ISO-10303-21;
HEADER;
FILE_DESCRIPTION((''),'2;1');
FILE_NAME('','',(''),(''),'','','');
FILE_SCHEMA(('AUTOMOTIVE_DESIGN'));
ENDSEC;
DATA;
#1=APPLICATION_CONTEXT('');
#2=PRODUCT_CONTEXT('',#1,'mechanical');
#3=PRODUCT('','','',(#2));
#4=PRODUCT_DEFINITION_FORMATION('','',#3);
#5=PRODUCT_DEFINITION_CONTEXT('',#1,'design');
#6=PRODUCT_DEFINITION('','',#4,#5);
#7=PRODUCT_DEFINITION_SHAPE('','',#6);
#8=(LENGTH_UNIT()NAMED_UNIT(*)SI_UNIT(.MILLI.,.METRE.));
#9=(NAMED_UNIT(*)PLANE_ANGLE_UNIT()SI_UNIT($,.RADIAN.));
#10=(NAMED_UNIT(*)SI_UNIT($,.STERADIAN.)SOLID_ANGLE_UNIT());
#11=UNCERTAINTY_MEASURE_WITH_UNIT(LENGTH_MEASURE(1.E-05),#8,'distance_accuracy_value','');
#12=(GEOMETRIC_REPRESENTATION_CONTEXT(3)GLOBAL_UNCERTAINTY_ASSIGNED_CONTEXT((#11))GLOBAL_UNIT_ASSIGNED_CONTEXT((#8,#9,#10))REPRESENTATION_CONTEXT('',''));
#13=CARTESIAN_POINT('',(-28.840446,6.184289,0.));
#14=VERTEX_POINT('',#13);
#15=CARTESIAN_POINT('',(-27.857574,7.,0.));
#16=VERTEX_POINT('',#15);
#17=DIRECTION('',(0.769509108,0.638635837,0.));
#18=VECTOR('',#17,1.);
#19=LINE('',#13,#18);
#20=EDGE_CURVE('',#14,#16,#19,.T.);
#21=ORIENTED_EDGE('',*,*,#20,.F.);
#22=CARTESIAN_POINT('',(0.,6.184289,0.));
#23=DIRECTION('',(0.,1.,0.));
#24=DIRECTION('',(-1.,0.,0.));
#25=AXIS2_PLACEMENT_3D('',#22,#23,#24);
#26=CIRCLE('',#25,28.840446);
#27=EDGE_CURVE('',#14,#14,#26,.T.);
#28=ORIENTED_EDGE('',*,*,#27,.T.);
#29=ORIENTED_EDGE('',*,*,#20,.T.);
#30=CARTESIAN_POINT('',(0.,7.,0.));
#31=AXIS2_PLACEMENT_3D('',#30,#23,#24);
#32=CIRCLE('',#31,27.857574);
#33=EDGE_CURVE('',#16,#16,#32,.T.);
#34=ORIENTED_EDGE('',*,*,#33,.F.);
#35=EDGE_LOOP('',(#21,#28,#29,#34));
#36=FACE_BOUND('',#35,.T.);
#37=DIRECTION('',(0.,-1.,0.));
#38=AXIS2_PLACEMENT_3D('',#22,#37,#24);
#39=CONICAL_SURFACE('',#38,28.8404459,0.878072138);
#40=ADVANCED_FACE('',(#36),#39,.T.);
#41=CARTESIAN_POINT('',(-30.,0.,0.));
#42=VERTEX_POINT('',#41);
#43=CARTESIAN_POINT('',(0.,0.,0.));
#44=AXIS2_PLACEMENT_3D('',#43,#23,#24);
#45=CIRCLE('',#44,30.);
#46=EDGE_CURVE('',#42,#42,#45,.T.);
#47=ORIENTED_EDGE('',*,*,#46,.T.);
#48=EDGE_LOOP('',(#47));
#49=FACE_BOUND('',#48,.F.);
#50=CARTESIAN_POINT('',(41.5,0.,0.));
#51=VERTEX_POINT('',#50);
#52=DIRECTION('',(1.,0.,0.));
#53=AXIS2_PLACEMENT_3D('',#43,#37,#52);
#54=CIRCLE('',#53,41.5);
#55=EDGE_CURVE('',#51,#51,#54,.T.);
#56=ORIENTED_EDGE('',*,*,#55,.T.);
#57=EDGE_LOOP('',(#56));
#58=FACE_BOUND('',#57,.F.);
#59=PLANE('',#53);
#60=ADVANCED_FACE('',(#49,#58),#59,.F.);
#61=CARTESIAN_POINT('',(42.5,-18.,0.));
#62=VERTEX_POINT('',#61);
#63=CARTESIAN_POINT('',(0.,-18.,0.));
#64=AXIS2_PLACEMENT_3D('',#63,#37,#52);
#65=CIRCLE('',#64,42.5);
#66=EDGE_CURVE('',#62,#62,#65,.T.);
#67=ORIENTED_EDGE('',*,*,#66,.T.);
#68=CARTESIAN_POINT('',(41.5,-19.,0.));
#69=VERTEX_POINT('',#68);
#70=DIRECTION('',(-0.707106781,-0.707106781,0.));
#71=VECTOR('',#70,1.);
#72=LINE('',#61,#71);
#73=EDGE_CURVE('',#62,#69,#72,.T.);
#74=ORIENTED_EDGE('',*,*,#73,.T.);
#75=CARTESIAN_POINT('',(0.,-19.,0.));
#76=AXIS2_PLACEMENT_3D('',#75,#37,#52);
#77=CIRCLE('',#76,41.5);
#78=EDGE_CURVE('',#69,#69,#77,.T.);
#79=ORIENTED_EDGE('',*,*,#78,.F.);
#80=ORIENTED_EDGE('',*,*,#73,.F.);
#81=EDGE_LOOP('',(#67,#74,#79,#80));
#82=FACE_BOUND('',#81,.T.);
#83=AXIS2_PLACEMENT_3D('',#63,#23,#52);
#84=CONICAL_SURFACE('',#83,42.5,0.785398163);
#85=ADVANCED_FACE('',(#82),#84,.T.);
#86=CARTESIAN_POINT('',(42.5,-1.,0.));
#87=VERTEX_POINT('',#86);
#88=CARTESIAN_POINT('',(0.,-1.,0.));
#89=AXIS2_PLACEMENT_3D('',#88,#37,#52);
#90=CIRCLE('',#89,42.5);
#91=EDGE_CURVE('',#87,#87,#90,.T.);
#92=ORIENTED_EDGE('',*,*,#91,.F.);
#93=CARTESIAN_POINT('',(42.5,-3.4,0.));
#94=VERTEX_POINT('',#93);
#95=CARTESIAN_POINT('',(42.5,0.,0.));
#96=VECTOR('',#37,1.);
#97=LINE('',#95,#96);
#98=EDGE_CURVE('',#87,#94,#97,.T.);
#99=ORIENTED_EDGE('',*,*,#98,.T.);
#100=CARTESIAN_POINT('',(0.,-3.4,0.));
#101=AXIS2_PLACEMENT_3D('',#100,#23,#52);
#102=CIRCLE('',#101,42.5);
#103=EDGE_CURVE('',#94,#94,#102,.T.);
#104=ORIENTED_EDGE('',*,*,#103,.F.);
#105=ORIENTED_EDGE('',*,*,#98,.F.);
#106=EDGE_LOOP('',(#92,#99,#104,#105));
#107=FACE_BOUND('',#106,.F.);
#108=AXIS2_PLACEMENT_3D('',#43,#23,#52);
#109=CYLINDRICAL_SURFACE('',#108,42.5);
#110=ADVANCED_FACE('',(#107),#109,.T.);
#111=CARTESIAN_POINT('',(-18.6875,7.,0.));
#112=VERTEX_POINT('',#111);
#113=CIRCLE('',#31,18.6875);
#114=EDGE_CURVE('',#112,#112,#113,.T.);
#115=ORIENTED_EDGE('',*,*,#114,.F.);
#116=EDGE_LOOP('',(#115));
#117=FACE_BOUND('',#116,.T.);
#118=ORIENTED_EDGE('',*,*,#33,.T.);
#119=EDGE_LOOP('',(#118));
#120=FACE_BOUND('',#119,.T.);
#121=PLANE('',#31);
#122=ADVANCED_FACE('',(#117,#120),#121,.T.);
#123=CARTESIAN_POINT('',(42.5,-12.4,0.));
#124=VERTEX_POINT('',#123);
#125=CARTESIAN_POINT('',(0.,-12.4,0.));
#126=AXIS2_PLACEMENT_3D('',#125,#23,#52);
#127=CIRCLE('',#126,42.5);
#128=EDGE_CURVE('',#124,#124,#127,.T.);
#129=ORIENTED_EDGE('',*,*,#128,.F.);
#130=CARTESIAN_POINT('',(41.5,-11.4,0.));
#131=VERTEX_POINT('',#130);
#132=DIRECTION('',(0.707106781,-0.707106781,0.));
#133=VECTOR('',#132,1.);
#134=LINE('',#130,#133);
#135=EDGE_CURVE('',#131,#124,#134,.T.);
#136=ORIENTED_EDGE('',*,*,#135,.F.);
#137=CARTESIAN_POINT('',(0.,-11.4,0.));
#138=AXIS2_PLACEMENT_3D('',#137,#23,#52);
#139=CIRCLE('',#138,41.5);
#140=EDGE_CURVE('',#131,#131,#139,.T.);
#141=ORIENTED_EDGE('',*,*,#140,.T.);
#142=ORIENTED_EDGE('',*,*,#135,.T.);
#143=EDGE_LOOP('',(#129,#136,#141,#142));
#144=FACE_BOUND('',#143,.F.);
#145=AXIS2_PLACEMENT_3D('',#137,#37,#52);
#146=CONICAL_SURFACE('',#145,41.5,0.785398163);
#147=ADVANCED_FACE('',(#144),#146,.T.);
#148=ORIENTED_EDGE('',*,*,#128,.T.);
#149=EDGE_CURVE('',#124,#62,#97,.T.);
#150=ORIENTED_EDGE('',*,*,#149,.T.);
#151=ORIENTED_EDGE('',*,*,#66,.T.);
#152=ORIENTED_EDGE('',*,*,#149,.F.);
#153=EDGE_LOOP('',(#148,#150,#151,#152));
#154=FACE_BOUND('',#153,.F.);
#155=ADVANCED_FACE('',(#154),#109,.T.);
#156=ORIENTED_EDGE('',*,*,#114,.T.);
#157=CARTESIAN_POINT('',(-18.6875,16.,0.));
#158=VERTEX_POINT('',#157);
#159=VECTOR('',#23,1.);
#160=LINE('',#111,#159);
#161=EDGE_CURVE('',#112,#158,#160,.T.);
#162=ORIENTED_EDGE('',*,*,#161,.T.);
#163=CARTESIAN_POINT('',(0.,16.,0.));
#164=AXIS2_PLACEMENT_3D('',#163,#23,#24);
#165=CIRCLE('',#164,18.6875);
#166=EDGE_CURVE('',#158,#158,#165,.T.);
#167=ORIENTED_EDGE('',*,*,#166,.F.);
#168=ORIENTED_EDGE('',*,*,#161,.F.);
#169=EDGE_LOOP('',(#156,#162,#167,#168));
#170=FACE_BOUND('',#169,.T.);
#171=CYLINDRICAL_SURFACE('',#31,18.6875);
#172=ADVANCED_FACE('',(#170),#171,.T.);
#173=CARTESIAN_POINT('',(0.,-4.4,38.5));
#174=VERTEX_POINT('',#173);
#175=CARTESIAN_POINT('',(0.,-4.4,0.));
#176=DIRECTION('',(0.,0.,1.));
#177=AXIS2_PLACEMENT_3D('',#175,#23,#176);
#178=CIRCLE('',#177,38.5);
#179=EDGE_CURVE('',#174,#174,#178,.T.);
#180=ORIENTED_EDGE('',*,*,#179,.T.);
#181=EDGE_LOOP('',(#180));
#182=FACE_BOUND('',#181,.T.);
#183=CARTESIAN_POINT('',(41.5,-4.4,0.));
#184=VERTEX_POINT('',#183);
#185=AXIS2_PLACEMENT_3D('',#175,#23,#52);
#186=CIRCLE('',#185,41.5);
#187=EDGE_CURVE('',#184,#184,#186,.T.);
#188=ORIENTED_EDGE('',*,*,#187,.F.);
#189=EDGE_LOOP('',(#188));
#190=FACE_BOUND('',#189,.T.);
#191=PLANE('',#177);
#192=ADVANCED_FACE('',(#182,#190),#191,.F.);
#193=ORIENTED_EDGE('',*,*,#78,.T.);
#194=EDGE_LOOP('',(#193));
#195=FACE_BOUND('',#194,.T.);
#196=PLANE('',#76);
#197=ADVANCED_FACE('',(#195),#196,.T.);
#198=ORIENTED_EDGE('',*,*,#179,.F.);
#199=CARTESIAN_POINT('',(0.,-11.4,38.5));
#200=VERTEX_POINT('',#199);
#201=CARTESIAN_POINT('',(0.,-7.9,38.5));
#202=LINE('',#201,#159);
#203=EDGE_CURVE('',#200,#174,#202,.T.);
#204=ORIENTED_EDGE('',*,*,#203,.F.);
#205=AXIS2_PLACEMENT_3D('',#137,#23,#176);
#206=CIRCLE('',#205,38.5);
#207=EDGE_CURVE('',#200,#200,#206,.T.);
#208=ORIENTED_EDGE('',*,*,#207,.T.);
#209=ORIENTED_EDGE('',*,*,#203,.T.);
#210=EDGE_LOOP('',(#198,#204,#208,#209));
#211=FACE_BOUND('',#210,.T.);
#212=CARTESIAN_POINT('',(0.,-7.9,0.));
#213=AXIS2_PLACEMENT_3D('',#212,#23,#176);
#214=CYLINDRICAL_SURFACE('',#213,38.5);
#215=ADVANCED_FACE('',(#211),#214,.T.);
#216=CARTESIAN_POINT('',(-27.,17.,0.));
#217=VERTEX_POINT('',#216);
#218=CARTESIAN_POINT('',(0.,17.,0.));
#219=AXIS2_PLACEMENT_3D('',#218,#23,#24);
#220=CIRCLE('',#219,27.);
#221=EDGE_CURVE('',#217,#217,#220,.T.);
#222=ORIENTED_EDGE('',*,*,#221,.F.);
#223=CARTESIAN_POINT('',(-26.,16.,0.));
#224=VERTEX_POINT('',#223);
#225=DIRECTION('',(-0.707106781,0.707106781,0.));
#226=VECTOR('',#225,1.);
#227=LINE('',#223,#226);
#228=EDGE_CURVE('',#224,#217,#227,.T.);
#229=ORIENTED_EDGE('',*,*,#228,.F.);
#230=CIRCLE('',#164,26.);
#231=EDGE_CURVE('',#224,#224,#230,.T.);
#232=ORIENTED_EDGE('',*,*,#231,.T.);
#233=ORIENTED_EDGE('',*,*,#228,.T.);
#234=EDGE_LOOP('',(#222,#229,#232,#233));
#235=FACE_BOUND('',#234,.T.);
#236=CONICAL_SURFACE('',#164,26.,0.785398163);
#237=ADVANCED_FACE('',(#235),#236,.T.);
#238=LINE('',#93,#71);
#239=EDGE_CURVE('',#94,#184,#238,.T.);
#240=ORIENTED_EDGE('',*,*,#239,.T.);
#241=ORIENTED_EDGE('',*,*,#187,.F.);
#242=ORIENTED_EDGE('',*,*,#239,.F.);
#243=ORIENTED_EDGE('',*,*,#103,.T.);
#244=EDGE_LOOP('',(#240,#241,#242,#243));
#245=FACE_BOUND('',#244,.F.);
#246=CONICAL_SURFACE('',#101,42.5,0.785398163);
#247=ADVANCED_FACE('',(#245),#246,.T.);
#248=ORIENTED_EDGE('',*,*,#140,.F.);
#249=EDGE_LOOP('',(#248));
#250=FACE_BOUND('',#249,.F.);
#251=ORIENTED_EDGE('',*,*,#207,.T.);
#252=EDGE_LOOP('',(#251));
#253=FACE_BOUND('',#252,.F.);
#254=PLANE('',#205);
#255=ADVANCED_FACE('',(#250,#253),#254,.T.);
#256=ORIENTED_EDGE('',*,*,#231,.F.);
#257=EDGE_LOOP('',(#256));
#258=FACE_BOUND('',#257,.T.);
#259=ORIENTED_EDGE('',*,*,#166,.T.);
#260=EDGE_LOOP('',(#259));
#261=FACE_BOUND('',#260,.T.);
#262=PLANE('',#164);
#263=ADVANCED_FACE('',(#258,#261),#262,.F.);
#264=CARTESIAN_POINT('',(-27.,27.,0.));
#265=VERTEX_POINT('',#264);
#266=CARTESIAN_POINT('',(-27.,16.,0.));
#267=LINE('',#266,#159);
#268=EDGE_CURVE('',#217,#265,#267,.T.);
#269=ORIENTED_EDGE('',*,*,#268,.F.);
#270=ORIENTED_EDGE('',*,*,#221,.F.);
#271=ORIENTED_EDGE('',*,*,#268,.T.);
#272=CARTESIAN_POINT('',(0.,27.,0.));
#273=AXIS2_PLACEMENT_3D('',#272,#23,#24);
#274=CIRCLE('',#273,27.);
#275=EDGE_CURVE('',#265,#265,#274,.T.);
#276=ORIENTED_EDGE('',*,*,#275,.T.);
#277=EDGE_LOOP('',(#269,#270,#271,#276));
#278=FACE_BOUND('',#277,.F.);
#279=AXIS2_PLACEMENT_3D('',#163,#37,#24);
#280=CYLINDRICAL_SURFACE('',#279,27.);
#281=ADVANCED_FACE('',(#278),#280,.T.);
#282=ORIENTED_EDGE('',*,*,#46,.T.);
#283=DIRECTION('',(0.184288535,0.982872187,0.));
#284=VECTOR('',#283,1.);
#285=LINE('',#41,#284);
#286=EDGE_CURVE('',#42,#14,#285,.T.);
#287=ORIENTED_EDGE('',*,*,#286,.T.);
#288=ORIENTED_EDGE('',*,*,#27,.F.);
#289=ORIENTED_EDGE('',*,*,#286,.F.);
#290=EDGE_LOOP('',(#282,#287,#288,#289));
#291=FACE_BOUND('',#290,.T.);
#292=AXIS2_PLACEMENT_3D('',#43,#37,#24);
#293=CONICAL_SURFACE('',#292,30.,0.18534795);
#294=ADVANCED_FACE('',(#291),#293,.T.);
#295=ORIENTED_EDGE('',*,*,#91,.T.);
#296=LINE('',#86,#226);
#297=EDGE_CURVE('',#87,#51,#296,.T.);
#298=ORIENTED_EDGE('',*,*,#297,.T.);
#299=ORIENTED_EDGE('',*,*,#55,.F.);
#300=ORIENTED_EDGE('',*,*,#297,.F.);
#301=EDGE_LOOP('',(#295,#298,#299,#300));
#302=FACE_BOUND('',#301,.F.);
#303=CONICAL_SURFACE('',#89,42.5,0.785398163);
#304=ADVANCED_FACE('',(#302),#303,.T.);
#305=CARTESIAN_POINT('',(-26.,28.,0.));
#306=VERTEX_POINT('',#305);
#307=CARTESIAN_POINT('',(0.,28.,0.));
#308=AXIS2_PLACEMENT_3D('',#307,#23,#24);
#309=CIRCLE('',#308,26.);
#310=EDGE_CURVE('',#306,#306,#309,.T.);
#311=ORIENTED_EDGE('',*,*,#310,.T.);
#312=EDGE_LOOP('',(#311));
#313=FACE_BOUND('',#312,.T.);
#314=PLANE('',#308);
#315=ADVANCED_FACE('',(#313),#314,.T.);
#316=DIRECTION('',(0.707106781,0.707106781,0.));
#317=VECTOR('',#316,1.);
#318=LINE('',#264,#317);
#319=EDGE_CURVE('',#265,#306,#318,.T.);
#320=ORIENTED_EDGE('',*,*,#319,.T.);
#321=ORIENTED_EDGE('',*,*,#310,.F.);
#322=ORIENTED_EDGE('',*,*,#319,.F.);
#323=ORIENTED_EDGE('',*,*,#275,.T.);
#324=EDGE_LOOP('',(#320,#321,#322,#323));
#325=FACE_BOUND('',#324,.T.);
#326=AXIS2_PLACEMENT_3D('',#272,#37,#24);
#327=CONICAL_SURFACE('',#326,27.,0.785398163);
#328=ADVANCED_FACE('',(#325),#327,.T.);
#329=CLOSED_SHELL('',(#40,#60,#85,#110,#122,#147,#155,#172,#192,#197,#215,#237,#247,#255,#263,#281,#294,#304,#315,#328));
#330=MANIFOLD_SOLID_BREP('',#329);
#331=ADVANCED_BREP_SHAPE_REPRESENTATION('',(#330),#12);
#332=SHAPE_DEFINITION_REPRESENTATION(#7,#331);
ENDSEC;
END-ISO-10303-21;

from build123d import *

# Parameters (mm, degrees)
F0_R     = 42.5
F1_DEPTH = 19
F2_W     = 7
F2_H     = 4
F4_R     = 30
F5_DEPTH = 16
F6_R     = 27
F7_DEPTH = 12


# Not quite as in the source:
# - a fillet or chamfer that OpenCascade refuses, or shapes differently, is made with other operations: its cross-section is extruded or revolved along the edge and cut away or added


with BuildPart() as f1:
    # F0 (on Front) → F1 (new body)
    with BuildSketch(Plane.XZ):
        Circle(F0_R)
    extrude(amount=F1_DEPTH)

    # F2 (on Right) → F3 (revolve, cut)
    with BuildSketch(Plane.YZ):
        with Locations((-7.9, 40.5)):
            Rectangle(F2_W, F2_H)
    revolve(axis=Axis((0, 0, 0), (0, 1, 0)), mode=Mode.SUBTRACT)

    # F4 (on face) → F5 (join)
    with BuildSketch(Plane(origin=(0, 0, 0), x_dir=(-1, 0, 0), z_dir=(0, 1, 0))):
        Circle(F4_R)
    extrude(amount=F5_DEPTH)

    # F6 (on face) → F7 (join)
    with BuildSketch(Plane(origin=(0, 16, 0), x_dir=(-1, 0, 0), z_dir=(0, 1, 0))):
        Circle(F6_R)
    extrude(amount=F7_DEPTH)

    # F8 (on Top) → F9 (revolve, cut)
    with BuildSketch(Plane.XY):
        Polygon((-30, 16), (-30, 0), (-28.6875, 7), (-18.6875, 7), (-18.6875, 16), align=None)
    revolve(axis=Axis((0, 23.2052635401, 0), (0, 1, 0)), mode=Mode.SUBTRACT)

    # F10: chamfer of 1 on 8 edges, made by hand

    # F10_s1 → F10_t2 (revolve, cut)
    with BuildSketch(Plane.XY):
        Polygon((42.5, -3.4), (41.5, -4.4), (42.5, -4.4), align=None)
    revolve(axis=Axis((0, -4.4, 0), (0, 1, 0)), mode=Mode.SUBTRACT)

    # F10_s3 → F10_t4 (revolve, cut)
    with BuildSketch(Plane.XY):
        Polygon((41.5, -11.4), (42.5, -12.4), (42.5, -11.4), align=None)
    revolve(axis=Axis((0, -11.4, 0), (0, 1, 0)), mode=Mode.SUBTRACT)

    # F10_s5 → F10_t6 (revolve, cut)
    with BuildSketch(Plane.XY):
        Polygon((42.5, -18), (41.5, -19), (42.5, -19), align=None)
    revolve(axis=Axis((0, -19, 0), (0, -1, 0)), mode=Mode.SUBTRACT)

    # F10_s7 → F10_t8 (revolve, cut)
    with BuildSketch(Plane.XY):
        Polygon((42.5, -1), (41.5, 0), (42.5, 0), align=None)
    revolve(axis=Axis((0, 0, 0), (0, -1, 0)), mode=Mode.SUBTRACT)

    # F10_s9 → F10_t10 (revolve, cut)
    with BuildSketch(Plane.XY):
        Polygon((-28.8404458997, 6.1842885351), (-27.8575737127, 7), (-28.6875, 7), align=None)
    revolve(axis=Axis((0, 7, 0), (0, 1, 0)), mode=Mode.SUBTRACT)

    # F10_s11 → F10_t12 (revolve, cut)
    with BuildSketch(Plane.XY):
        Polygon((-26, 16), (-27, 17), (-27, 16), align=None)
    revolve(axis=Axis((0, 16, 0), (0, 1, 0)), mode=Mode.SUBTRACT)

    # F10_s13 → F10_t14 (revolve, cut)
    with BuildSketch(Plane.XY):
        Polygon((-27, 27), (-26, 28), (-27, 28), align=None)
    revolve(axis=Axis((0, 28, 0), (0, 1, 0)), mode=Mode.SUBTRACT)


solid = f1.part
